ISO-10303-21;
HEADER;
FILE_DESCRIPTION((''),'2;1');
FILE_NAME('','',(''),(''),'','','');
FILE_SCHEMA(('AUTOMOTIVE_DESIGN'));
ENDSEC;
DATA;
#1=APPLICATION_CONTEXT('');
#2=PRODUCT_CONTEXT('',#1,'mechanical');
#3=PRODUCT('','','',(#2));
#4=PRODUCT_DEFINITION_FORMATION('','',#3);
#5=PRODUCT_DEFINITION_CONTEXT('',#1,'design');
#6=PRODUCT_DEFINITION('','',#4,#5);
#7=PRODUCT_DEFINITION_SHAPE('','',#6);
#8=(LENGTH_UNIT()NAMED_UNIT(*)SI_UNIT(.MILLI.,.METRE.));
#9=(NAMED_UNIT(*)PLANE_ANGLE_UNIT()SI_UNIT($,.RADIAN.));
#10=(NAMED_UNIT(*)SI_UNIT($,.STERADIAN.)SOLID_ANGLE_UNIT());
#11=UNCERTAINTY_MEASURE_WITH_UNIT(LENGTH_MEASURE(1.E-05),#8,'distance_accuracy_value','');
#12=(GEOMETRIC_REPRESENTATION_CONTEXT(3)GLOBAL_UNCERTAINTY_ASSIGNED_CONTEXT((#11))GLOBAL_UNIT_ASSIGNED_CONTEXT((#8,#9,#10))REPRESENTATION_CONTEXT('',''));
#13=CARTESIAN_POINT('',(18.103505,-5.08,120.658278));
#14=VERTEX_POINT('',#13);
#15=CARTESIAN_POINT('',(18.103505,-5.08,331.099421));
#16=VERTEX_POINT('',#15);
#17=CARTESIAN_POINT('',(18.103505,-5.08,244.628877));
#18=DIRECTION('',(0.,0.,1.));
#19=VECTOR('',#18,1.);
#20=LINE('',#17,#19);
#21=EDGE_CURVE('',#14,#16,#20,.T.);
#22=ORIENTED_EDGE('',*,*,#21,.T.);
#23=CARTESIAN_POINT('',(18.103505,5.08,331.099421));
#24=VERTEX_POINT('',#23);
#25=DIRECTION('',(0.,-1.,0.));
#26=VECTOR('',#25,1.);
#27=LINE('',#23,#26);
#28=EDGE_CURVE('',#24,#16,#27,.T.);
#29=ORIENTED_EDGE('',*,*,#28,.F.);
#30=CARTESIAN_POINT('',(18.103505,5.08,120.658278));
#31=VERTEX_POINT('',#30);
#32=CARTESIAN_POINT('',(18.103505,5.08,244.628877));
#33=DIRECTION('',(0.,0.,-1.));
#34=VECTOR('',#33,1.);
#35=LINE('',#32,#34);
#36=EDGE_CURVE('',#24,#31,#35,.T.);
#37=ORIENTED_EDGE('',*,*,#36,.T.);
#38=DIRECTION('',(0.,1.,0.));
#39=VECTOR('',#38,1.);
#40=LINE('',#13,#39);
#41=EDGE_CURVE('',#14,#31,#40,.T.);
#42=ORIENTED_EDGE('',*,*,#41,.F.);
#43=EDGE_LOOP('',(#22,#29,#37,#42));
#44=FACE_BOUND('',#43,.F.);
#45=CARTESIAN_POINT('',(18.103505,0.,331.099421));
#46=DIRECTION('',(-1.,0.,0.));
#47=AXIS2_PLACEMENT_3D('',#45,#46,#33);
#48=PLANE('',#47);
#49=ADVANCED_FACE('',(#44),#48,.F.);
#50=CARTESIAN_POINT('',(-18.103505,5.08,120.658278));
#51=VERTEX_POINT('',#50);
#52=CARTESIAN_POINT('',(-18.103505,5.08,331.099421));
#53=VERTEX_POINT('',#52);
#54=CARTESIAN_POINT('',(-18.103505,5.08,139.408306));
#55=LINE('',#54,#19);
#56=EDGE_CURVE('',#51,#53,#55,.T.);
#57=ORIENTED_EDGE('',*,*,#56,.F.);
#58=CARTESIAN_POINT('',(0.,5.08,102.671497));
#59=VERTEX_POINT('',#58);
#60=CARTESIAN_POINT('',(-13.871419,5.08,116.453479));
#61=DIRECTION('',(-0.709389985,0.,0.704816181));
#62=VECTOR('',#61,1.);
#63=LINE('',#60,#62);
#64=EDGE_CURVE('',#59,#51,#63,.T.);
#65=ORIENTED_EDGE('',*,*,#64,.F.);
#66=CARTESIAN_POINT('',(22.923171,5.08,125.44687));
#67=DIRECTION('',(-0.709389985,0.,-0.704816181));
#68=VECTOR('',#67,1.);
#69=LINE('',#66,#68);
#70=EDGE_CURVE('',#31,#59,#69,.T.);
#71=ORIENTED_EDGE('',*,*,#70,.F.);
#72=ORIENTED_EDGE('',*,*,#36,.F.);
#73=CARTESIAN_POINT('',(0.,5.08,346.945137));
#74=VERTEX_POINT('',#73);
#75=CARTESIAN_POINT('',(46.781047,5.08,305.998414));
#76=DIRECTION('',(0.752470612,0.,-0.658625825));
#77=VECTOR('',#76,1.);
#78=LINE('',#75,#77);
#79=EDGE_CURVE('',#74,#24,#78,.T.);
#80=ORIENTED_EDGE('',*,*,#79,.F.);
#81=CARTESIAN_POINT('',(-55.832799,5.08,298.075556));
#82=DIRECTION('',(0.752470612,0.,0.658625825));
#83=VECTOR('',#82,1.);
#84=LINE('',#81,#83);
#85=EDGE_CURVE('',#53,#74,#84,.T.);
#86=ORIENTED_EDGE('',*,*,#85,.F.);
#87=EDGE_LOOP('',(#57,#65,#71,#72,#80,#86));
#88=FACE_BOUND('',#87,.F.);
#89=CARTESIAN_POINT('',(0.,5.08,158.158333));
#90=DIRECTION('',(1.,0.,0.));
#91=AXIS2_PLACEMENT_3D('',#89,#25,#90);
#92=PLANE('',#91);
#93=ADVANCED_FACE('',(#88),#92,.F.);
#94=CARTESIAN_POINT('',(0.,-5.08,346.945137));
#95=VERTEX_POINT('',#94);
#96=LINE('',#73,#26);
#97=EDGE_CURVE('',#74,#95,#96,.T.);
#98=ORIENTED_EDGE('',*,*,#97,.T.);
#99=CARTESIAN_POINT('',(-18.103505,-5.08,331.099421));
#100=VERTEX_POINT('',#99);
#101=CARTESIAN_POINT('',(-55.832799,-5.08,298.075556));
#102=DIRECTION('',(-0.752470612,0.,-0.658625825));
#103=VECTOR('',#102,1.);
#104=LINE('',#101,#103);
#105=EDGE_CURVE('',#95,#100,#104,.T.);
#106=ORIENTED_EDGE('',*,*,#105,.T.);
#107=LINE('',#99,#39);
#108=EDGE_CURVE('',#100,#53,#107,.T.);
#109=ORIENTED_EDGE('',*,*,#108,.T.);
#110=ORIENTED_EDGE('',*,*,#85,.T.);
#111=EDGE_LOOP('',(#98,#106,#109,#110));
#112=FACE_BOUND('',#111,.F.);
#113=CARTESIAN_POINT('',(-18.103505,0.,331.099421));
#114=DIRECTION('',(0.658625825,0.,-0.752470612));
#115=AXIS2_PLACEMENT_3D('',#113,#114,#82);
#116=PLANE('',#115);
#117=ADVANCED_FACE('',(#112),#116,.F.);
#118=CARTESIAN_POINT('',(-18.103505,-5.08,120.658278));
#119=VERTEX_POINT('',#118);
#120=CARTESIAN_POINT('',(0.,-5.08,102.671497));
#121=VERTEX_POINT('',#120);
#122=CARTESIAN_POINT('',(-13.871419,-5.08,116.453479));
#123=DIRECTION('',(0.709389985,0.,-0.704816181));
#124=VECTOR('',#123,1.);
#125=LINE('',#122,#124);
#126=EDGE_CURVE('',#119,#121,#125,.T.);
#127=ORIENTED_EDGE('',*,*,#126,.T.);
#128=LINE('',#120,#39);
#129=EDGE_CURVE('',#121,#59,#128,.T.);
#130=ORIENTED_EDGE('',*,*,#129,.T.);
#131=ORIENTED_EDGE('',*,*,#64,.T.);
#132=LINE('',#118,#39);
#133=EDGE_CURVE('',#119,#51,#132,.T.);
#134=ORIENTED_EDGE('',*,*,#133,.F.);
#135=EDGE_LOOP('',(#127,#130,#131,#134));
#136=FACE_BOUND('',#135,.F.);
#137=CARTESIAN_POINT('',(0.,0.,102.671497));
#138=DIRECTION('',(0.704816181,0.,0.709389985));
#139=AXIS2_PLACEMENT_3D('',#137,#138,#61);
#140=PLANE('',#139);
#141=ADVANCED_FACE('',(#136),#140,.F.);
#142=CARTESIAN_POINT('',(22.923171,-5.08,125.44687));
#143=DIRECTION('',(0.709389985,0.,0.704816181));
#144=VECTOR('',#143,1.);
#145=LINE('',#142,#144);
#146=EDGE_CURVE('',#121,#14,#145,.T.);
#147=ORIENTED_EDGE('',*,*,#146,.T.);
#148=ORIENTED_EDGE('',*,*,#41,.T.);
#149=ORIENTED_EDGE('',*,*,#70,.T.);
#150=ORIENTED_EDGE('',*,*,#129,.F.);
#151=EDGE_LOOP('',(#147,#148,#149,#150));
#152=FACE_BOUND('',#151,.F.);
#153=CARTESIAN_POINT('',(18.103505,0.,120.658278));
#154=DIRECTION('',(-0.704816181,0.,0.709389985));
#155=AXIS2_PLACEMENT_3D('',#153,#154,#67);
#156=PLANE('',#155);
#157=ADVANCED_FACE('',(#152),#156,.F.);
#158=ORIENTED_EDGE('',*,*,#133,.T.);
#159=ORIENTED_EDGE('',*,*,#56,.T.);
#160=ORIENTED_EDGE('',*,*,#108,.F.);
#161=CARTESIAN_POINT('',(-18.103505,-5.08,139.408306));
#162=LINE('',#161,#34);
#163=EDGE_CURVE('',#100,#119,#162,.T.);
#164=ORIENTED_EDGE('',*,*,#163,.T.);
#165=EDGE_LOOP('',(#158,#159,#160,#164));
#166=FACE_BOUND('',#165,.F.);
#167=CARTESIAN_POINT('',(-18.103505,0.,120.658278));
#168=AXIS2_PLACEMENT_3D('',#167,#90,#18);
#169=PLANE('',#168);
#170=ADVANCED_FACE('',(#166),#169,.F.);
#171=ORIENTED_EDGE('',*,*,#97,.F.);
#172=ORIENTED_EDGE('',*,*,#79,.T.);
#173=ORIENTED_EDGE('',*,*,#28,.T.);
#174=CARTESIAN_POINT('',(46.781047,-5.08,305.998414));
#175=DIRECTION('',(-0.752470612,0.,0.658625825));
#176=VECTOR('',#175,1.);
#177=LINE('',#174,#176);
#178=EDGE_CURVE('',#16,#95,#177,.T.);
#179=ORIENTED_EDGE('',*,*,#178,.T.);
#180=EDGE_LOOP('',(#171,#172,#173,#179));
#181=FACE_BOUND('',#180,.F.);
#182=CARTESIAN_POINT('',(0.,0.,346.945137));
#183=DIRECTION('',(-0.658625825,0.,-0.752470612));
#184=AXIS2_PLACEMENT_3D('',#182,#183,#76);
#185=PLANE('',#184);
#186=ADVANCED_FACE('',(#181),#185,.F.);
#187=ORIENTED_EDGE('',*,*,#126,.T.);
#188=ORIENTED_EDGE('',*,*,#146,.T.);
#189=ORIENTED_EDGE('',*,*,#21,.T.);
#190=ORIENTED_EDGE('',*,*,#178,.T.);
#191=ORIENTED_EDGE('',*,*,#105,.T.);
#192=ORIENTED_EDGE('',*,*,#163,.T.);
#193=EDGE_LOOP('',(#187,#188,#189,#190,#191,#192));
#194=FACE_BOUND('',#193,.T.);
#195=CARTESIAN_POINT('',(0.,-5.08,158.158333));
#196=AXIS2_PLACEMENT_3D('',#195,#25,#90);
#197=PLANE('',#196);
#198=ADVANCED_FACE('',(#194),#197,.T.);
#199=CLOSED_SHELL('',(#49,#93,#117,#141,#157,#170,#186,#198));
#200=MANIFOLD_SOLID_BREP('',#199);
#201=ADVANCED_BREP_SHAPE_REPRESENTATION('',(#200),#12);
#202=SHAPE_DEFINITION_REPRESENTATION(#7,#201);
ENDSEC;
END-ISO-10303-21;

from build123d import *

# Parameters (mm, degrees)
F1_DEPTH = 5.08
F2_SIZE2 = 2.54
F2_SIZE  = 2.54
F3_W     = 296.9444543123
F3_H     = 473.9504568279
F4_DEPTH = 25.4
F5_DEPTH = 25.4


with BuildPart() as f1:
    # F0 (on Front) → F1 (new body, symmetric)
    with BuildSketch(Plane.XZ):
        with BuildLine():
            Line((-52.1713197231, 34.4429798424), (-58.770544827, 10.8928056434))
            add(Edge.make_bspline(
                [(-58.770544827, 10.8928056434), (-56.5008980701, 12.7169401311), (-52.1836149963, 16.1867774191), (-46.6481737875, 20.7689821181), (-42.103581434, 21.9474441882), (-37.1718262664, 20.3492743447), (-34.4780249811, 18.782172039), (-33.1500247121, 18.009616062)],
                knots=[0, 0, 0, 0, 0.243402605, 0.4629962541, 0.6364782013, 0.8207896592, 1, 1, 1, 1], degree=3))
            Line((-33.1500247121, 18.009616062), (0, 0))
            Line((0, 0), (33.1500247121, 18.009616062))
            add(Edge.make_bspline(
                [(58.770544827, 10.8928056434), (56.5008980701, 12.7169401311), (52.1836149963, 16.1867774191), (46.6481737875, 20.7689821181), (42.103581434, 21.9474441882), (37.1718262664, 20.3492743447), (34.4780249811, 18.782172039), (33.1500247121, 18.009616062)],
                knots=[0, 0, 0, 0, 0.243402605, 0.4629962541, 0.6364782013, 0.8207896592, 1, 1, 1, 1], degree=3))
            Line((58.770544827, 10.8928056434), (52.1713197231, 34.4429798424))
            add(Edge.make_bspline(
                [(52.1713197231, 34.4429798424), (50.9728401731, 36.5972375719), (48.6948112169, 40.6919770164), (44.4995729387, 45.251524036), (40.7511119594, 46.0496576718), (38.4311188014, 45.2100224851), (37.2595414519, 44.7860136628)],
                knots=[0, 0, 0, 0, 0.3036076859, 0.5770871099, 0.7864324897, 1, 1, 1, 1], degree=3))
            Line((37.2595414519, 44.7860136628), (12.3838605359, 31.5890572965))
            add(Edge.make_bspline(
                [(12.3838605359, 31.5890572965), (12.0116389407, 36.4336241706), (11.2801299785, 45.9544153649), (11.9072727509, 59.0755429111), (13.0446244948, 72.3270750889), (15.0430309606, 81.3553880474), (20.0484846376, 98.9141245501), (23.1138356658, 110.0238526226), (25.6900193935, 114.2539658888), (26.796290651, 116.070471704)],
                knots=[0, 0, 0, 0, 0.1554376564, 0.3054740514, 0.451951706, 0.5786332255, 0.7535204728, 0.8941561452, 1, 1, 1, 1], degree=3))
            add(Edge.make_bspline(
                [(26.796290651, 116.070471704), (27.3208616845, 122.376340647), (28.4465148418, 135.9078184294), (30.7430371303, 162.2435359747), (32.8128164069, 193.0751698329), (36.1980689164, 226.214181027), (36.6885878869, 228.6104286649), (36.1789175706, 231.6056884809), (34.578084839, 241.1608396791), (32.1815946616, 268.5632469899), (29.2022062034, 298.3654205907), (26.6745591694, 323.5321383941), (26.2740528758, 332.6532529053), (26.1084791273, 336.424022913)],
                knots=[0, 0, 0, 0, 0.0954552012, 0.2048329812, 0.3319664827, 0.4522041038, 0.4827906265, 0.5164846256, 0.5812786199, 0.6946646008, 0.8165569483, 0.9241626057, 1, 1, 1, 1], degree=3))
            Line((26.1084791273, 336.424022913), (0, 384.5021128654))
            Line((0, 384.5021128654), (-26.1084791273, 336.424022913))
            add(Edge.make_bspline(
                [(-26.796290651, 116.070471704), (-27.3208616845, 122.376340647), (-28.4465148418, 135.9078184294), (-30.7430371303, 162.2435359747), (-32.8128164069, 193.0751698329), (-36.1980689164, 226.214181027), (-36.6885878869, 228.6104286649), (-36.1789175706, 231.6056884809), (-34.578084839, 241.1608396791), (-32.1815946616, 268.5632469899), (-29.2022062034, 298.3654205907), (-26.6745591694, 323.5321383941), (-26.2740528758, 332.6532529053), (-26.1084791273, 336.424022913)],
                knots=[0, 0, 0, 0, 0.0954552012, 0.2048329812, 0.3319664827, 0.4522041038, 0.4827906265, 0.5164846256, 0.5812786199, 0.6946646008, 0.8165569483, 0.9241626057, 1, 1, 1, 1], degree=3))
            add(Edge.make_bspline(
                [(-12.3838605359, 31.5890572965), (-12.0116389407, 36.4336241706), (-11.2801299785, 45.9544153649), (-11.9072727509, 59.0755429111), (-13.0446244948, 72.3270750889), (-15.0430309606, 81.3553880474), (-20.0484846376, 98.9141245501), (-23.1138356658, 110.0238526226), (-25.6900193935, 114.2539658888), (-26.796290651, 116.070471704)],
                knots=[0, 0, 0, 0, 0.1554376564, 0.3054740514, 0.451951706, 0.5786332255, 0.7535204728, 0.8941561452, 1, 1, 1, 1], degree=3))
            Line((-12.3838605359, 31.5890572965), (-37.2595414519, 44.7860136628))
            add(Edge.make_bspline(
                [(-52.1713197231, 34.4429798424), (-50.9728401731, 36.5972375719), (-48.6948112169, 40.6919770164), (-44.4995729387, 45.251524036), (-40.7511119594, 46.0496576718), (-38.4311188014, 45.2100224851), (-37.2595414519, 44.7860136628)],
                knots=[0, 0, 0, 0, 0.3036076859, 0.5770871099, 0.7864324897, 1, 1, 1, 1], degree=3))
        make_face()
    extrude(amount=F1_DEPTH, both=True)

    # F2
    f2_edges = [f1.edges().sort_by_distance(p)[0] for p in [
        (-36.32486, 5.08, 226.315561),
        (-13.693841, 5.08, 74.863456),
        (-24.821701, 5.08, 38.187535),
        (-46.502615, 5.08, 42.946726),
        (-55.470932, 5.08, 22.667893),
        (-47.034517, 5.08, 20.082213),
        (-16.575012, 5.08, 9.004808),
        (16.575012, 5.08, 9.004808),
        (47.034517, 5.08, 20.082213),
        (55.470932, 5.08, 22.667893),
        (46.502615, 5.08, 42.946726),
        (24.821701, 5.08, 38.187535),
        (13.693841, 5.08, 74.863456),
        (36.32486, 5.08, 226.315561),
        (13.05424, 5.08, 360.463068),
        (-13.05424, 5.08, 360.463068),
        (-36.32486, -5.08, 226.315561),
        (-13.693841, -5.08, 74.863456),
        (-24.821701, -5.08, 38.187535),
        (-46.502615, -5.08, 42.946726),
        (-55.470932, -5.08, 22.667893),
        (-47.034517, -5.08, 20.082213),
        (-16.575012, -5.08, 9.004808),
        (16.575012, -5.08, 9.004808),
        (47.034517, -5.08, 20.082213),
        (55.470932, -5.08, 22.667893),
        (46.502615, -5.08, 42.946726),
        (24.821701, -5.08, 38.187535),
        (13.693841, -5.08, 74.863456),
        (36.32486, -5.08, 226.315561),
        (13.05424, -5.08, 360.463068),
        (-13.05424, -5.08, 360.463068),
    ]]
    chamfer(f2_edges, length=F2_SIZE, length2=F2_SIZE2)

    # F3 (on Front) → F4 (cut)
    with BuildSketch(Plane.XZ):
        with Locations((-3.1622722745, 199.3846241385)):
            Rectangle(F3_W, F3_H)
        Polygon((18.1035045534, 120.6582784653), (0, 102.6714965701), (-18.1035045534, 120.6582784653), (-18.1035045534, 331.0994207859), (0, 346.9451367855), (18.1035045534, 331.0994207859), align=None, mode=Mode.SUBTRACT)
    extrude(amount=-F4_DEPTH, mode=Mode.SUBTRACT)

    # F5 (cut): a face of the model
    f5_faces = [f1.faces().sort_by_distance(p)[0] for p in [
        (-9.5209365747, 0, 358.5443317782),
    ]]
    extrude(f5_faces, amount=-F5_DEPTH, mode=Mode.SUBTRACT)


solid = f1.part
